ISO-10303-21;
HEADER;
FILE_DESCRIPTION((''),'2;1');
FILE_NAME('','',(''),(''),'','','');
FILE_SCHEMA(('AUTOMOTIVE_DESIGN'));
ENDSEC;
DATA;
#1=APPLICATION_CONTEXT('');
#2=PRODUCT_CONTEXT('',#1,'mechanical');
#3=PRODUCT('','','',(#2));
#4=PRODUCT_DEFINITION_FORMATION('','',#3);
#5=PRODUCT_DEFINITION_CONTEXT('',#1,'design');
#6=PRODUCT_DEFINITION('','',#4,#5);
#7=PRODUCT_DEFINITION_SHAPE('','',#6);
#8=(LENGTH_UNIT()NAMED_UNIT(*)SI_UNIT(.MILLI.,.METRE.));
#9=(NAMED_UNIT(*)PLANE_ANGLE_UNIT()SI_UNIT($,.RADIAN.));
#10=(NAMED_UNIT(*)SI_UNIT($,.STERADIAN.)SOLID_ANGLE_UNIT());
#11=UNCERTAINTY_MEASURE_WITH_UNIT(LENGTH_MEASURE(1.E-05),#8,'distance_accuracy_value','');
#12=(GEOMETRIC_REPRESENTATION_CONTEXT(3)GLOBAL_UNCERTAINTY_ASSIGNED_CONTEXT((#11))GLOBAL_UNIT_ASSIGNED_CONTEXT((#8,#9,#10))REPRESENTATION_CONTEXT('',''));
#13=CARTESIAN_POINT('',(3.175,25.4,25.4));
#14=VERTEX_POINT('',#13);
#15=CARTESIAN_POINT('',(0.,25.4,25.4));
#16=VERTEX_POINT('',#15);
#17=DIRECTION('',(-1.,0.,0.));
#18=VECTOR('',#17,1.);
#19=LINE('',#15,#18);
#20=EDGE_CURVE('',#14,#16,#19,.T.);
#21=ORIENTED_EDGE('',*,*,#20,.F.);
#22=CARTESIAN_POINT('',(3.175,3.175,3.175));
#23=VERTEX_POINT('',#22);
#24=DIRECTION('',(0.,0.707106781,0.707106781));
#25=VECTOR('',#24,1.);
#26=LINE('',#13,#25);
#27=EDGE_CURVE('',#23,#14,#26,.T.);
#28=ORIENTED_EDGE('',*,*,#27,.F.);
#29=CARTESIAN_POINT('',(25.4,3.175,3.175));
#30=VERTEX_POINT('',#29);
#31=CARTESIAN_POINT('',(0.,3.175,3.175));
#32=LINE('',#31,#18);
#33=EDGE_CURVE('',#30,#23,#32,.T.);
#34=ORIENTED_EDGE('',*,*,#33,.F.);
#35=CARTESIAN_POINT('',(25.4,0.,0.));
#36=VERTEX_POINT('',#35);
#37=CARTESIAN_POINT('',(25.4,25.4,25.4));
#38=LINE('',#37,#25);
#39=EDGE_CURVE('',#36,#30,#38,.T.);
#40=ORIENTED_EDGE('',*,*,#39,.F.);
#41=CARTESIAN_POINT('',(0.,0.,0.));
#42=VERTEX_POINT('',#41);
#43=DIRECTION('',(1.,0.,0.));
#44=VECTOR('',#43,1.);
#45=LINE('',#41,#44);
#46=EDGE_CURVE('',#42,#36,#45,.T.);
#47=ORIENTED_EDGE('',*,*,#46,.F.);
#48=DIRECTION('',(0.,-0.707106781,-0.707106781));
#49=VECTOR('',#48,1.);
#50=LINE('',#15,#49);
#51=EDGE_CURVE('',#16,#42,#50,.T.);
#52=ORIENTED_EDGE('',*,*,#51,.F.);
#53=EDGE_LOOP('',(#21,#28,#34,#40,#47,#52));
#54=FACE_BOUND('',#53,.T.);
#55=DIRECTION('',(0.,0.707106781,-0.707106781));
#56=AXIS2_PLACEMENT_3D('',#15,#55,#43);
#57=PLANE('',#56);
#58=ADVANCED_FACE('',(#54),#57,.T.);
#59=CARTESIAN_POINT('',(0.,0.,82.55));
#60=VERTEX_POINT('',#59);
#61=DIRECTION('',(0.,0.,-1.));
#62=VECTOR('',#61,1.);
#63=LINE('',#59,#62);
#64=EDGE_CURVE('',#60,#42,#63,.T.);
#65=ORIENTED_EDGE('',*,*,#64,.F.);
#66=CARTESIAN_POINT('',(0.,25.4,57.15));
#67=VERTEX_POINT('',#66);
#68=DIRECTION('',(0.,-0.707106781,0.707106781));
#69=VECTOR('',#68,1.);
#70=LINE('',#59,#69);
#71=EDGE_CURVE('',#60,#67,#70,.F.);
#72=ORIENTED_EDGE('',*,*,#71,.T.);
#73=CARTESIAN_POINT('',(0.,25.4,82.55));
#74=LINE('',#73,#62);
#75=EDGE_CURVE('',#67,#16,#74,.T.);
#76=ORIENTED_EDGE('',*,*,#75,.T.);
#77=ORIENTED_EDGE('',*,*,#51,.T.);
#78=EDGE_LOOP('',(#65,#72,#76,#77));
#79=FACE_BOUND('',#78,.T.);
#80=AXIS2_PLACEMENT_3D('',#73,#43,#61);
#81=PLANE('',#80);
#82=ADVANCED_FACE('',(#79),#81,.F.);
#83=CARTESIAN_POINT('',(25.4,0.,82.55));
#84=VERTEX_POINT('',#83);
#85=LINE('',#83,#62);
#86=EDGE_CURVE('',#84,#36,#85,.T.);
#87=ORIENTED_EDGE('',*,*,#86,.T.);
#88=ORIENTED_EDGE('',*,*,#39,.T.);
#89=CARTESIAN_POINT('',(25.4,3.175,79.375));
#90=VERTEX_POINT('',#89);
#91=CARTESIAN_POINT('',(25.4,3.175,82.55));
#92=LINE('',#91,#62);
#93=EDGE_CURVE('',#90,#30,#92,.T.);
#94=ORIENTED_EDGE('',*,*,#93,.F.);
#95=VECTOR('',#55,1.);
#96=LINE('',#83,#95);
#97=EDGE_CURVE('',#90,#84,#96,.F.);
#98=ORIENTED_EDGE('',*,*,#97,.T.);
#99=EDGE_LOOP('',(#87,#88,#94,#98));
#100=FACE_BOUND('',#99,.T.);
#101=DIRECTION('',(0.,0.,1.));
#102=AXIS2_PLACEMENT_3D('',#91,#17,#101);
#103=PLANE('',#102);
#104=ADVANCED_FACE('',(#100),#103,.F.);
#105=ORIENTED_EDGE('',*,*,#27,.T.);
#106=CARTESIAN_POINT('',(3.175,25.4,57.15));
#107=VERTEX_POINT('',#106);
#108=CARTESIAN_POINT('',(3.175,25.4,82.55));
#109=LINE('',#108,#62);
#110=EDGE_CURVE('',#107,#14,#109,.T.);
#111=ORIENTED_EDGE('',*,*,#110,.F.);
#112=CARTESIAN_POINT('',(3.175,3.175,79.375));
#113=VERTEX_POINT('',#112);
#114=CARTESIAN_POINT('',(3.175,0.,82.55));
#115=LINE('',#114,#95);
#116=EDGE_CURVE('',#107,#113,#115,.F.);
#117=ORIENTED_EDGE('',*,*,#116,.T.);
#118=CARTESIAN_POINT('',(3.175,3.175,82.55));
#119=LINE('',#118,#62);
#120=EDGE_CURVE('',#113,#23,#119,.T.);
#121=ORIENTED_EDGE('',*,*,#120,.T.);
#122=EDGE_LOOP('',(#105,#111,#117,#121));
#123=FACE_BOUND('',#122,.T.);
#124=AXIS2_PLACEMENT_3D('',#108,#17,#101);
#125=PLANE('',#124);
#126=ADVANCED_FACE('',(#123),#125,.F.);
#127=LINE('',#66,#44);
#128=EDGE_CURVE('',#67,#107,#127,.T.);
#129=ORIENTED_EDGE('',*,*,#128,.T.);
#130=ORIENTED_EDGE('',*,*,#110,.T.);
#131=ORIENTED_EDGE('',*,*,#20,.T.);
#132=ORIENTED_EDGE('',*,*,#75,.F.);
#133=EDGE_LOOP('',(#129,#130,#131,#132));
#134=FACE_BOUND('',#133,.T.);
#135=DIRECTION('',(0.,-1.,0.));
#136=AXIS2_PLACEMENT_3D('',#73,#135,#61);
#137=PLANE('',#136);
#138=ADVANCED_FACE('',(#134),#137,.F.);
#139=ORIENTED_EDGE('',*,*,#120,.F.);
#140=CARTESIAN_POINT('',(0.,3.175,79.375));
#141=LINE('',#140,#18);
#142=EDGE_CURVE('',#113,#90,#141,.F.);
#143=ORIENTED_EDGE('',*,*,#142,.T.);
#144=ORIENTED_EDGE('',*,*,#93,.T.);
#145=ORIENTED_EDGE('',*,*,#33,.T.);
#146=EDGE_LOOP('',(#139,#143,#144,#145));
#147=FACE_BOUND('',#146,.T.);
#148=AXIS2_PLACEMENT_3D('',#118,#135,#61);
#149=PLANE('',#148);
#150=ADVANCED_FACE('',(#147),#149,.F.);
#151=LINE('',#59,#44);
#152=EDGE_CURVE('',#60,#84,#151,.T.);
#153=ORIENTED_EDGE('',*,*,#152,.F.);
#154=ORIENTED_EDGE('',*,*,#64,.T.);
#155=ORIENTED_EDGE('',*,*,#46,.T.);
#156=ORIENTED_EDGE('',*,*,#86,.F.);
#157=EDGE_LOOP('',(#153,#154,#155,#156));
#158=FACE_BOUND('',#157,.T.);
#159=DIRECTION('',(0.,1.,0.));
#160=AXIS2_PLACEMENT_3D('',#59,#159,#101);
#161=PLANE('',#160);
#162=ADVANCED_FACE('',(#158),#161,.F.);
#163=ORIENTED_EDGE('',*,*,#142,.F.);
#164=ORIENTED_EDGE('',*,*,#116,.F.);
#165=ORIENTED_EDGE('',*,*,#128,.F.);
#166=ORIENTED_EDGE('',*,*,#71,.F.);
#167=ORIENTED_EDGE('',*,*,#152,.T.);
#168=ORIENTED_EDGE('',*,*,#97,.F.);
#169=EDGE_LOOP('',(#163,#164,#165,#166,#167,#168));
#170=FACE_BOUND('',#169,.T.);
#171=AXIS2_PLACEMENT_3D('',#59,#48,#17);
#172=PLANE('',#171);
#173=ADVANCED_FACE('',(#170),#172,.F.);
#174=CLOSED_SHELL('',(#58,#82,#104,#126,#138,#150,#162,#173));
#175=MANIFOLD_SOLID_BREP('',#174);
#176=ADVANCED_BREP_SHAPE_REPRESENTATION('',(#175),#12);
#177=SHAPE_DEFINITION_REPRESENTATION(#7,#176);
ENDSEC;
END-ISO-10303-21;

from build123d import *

# Parameters (mm, degrees)
BOSS_EXTRUDE1_DEPTH = 82.55
CHAMFER1_SIZE       = 25.4


with BuildPart() as part:
    # Sketch1 → Boss-Extrude1 (new body)
    with BuildSketch(Plane.XY):
        Polygon((0, 25.4), (0, 0), (25.4, 0), (25.4, 3.175), (3.175, 3.175), (3.175, 25.4), align=None)
    extrude(amount=BOSS_EXTRUDE1_DEPTH)

    # Chamfer1
    chamfer1_edges = [part.edges().sort_by_distance(p)[0] for p in [
        (1.5875, 25.4, 0),
        (1.5875, 25.4, 82.55),
    ]]
    chamfer(chamfer1_edges, length=CHAMFER1_SIZE - 0.0001)  # a hair under: the kernel refuses the full size


solid = part.part
